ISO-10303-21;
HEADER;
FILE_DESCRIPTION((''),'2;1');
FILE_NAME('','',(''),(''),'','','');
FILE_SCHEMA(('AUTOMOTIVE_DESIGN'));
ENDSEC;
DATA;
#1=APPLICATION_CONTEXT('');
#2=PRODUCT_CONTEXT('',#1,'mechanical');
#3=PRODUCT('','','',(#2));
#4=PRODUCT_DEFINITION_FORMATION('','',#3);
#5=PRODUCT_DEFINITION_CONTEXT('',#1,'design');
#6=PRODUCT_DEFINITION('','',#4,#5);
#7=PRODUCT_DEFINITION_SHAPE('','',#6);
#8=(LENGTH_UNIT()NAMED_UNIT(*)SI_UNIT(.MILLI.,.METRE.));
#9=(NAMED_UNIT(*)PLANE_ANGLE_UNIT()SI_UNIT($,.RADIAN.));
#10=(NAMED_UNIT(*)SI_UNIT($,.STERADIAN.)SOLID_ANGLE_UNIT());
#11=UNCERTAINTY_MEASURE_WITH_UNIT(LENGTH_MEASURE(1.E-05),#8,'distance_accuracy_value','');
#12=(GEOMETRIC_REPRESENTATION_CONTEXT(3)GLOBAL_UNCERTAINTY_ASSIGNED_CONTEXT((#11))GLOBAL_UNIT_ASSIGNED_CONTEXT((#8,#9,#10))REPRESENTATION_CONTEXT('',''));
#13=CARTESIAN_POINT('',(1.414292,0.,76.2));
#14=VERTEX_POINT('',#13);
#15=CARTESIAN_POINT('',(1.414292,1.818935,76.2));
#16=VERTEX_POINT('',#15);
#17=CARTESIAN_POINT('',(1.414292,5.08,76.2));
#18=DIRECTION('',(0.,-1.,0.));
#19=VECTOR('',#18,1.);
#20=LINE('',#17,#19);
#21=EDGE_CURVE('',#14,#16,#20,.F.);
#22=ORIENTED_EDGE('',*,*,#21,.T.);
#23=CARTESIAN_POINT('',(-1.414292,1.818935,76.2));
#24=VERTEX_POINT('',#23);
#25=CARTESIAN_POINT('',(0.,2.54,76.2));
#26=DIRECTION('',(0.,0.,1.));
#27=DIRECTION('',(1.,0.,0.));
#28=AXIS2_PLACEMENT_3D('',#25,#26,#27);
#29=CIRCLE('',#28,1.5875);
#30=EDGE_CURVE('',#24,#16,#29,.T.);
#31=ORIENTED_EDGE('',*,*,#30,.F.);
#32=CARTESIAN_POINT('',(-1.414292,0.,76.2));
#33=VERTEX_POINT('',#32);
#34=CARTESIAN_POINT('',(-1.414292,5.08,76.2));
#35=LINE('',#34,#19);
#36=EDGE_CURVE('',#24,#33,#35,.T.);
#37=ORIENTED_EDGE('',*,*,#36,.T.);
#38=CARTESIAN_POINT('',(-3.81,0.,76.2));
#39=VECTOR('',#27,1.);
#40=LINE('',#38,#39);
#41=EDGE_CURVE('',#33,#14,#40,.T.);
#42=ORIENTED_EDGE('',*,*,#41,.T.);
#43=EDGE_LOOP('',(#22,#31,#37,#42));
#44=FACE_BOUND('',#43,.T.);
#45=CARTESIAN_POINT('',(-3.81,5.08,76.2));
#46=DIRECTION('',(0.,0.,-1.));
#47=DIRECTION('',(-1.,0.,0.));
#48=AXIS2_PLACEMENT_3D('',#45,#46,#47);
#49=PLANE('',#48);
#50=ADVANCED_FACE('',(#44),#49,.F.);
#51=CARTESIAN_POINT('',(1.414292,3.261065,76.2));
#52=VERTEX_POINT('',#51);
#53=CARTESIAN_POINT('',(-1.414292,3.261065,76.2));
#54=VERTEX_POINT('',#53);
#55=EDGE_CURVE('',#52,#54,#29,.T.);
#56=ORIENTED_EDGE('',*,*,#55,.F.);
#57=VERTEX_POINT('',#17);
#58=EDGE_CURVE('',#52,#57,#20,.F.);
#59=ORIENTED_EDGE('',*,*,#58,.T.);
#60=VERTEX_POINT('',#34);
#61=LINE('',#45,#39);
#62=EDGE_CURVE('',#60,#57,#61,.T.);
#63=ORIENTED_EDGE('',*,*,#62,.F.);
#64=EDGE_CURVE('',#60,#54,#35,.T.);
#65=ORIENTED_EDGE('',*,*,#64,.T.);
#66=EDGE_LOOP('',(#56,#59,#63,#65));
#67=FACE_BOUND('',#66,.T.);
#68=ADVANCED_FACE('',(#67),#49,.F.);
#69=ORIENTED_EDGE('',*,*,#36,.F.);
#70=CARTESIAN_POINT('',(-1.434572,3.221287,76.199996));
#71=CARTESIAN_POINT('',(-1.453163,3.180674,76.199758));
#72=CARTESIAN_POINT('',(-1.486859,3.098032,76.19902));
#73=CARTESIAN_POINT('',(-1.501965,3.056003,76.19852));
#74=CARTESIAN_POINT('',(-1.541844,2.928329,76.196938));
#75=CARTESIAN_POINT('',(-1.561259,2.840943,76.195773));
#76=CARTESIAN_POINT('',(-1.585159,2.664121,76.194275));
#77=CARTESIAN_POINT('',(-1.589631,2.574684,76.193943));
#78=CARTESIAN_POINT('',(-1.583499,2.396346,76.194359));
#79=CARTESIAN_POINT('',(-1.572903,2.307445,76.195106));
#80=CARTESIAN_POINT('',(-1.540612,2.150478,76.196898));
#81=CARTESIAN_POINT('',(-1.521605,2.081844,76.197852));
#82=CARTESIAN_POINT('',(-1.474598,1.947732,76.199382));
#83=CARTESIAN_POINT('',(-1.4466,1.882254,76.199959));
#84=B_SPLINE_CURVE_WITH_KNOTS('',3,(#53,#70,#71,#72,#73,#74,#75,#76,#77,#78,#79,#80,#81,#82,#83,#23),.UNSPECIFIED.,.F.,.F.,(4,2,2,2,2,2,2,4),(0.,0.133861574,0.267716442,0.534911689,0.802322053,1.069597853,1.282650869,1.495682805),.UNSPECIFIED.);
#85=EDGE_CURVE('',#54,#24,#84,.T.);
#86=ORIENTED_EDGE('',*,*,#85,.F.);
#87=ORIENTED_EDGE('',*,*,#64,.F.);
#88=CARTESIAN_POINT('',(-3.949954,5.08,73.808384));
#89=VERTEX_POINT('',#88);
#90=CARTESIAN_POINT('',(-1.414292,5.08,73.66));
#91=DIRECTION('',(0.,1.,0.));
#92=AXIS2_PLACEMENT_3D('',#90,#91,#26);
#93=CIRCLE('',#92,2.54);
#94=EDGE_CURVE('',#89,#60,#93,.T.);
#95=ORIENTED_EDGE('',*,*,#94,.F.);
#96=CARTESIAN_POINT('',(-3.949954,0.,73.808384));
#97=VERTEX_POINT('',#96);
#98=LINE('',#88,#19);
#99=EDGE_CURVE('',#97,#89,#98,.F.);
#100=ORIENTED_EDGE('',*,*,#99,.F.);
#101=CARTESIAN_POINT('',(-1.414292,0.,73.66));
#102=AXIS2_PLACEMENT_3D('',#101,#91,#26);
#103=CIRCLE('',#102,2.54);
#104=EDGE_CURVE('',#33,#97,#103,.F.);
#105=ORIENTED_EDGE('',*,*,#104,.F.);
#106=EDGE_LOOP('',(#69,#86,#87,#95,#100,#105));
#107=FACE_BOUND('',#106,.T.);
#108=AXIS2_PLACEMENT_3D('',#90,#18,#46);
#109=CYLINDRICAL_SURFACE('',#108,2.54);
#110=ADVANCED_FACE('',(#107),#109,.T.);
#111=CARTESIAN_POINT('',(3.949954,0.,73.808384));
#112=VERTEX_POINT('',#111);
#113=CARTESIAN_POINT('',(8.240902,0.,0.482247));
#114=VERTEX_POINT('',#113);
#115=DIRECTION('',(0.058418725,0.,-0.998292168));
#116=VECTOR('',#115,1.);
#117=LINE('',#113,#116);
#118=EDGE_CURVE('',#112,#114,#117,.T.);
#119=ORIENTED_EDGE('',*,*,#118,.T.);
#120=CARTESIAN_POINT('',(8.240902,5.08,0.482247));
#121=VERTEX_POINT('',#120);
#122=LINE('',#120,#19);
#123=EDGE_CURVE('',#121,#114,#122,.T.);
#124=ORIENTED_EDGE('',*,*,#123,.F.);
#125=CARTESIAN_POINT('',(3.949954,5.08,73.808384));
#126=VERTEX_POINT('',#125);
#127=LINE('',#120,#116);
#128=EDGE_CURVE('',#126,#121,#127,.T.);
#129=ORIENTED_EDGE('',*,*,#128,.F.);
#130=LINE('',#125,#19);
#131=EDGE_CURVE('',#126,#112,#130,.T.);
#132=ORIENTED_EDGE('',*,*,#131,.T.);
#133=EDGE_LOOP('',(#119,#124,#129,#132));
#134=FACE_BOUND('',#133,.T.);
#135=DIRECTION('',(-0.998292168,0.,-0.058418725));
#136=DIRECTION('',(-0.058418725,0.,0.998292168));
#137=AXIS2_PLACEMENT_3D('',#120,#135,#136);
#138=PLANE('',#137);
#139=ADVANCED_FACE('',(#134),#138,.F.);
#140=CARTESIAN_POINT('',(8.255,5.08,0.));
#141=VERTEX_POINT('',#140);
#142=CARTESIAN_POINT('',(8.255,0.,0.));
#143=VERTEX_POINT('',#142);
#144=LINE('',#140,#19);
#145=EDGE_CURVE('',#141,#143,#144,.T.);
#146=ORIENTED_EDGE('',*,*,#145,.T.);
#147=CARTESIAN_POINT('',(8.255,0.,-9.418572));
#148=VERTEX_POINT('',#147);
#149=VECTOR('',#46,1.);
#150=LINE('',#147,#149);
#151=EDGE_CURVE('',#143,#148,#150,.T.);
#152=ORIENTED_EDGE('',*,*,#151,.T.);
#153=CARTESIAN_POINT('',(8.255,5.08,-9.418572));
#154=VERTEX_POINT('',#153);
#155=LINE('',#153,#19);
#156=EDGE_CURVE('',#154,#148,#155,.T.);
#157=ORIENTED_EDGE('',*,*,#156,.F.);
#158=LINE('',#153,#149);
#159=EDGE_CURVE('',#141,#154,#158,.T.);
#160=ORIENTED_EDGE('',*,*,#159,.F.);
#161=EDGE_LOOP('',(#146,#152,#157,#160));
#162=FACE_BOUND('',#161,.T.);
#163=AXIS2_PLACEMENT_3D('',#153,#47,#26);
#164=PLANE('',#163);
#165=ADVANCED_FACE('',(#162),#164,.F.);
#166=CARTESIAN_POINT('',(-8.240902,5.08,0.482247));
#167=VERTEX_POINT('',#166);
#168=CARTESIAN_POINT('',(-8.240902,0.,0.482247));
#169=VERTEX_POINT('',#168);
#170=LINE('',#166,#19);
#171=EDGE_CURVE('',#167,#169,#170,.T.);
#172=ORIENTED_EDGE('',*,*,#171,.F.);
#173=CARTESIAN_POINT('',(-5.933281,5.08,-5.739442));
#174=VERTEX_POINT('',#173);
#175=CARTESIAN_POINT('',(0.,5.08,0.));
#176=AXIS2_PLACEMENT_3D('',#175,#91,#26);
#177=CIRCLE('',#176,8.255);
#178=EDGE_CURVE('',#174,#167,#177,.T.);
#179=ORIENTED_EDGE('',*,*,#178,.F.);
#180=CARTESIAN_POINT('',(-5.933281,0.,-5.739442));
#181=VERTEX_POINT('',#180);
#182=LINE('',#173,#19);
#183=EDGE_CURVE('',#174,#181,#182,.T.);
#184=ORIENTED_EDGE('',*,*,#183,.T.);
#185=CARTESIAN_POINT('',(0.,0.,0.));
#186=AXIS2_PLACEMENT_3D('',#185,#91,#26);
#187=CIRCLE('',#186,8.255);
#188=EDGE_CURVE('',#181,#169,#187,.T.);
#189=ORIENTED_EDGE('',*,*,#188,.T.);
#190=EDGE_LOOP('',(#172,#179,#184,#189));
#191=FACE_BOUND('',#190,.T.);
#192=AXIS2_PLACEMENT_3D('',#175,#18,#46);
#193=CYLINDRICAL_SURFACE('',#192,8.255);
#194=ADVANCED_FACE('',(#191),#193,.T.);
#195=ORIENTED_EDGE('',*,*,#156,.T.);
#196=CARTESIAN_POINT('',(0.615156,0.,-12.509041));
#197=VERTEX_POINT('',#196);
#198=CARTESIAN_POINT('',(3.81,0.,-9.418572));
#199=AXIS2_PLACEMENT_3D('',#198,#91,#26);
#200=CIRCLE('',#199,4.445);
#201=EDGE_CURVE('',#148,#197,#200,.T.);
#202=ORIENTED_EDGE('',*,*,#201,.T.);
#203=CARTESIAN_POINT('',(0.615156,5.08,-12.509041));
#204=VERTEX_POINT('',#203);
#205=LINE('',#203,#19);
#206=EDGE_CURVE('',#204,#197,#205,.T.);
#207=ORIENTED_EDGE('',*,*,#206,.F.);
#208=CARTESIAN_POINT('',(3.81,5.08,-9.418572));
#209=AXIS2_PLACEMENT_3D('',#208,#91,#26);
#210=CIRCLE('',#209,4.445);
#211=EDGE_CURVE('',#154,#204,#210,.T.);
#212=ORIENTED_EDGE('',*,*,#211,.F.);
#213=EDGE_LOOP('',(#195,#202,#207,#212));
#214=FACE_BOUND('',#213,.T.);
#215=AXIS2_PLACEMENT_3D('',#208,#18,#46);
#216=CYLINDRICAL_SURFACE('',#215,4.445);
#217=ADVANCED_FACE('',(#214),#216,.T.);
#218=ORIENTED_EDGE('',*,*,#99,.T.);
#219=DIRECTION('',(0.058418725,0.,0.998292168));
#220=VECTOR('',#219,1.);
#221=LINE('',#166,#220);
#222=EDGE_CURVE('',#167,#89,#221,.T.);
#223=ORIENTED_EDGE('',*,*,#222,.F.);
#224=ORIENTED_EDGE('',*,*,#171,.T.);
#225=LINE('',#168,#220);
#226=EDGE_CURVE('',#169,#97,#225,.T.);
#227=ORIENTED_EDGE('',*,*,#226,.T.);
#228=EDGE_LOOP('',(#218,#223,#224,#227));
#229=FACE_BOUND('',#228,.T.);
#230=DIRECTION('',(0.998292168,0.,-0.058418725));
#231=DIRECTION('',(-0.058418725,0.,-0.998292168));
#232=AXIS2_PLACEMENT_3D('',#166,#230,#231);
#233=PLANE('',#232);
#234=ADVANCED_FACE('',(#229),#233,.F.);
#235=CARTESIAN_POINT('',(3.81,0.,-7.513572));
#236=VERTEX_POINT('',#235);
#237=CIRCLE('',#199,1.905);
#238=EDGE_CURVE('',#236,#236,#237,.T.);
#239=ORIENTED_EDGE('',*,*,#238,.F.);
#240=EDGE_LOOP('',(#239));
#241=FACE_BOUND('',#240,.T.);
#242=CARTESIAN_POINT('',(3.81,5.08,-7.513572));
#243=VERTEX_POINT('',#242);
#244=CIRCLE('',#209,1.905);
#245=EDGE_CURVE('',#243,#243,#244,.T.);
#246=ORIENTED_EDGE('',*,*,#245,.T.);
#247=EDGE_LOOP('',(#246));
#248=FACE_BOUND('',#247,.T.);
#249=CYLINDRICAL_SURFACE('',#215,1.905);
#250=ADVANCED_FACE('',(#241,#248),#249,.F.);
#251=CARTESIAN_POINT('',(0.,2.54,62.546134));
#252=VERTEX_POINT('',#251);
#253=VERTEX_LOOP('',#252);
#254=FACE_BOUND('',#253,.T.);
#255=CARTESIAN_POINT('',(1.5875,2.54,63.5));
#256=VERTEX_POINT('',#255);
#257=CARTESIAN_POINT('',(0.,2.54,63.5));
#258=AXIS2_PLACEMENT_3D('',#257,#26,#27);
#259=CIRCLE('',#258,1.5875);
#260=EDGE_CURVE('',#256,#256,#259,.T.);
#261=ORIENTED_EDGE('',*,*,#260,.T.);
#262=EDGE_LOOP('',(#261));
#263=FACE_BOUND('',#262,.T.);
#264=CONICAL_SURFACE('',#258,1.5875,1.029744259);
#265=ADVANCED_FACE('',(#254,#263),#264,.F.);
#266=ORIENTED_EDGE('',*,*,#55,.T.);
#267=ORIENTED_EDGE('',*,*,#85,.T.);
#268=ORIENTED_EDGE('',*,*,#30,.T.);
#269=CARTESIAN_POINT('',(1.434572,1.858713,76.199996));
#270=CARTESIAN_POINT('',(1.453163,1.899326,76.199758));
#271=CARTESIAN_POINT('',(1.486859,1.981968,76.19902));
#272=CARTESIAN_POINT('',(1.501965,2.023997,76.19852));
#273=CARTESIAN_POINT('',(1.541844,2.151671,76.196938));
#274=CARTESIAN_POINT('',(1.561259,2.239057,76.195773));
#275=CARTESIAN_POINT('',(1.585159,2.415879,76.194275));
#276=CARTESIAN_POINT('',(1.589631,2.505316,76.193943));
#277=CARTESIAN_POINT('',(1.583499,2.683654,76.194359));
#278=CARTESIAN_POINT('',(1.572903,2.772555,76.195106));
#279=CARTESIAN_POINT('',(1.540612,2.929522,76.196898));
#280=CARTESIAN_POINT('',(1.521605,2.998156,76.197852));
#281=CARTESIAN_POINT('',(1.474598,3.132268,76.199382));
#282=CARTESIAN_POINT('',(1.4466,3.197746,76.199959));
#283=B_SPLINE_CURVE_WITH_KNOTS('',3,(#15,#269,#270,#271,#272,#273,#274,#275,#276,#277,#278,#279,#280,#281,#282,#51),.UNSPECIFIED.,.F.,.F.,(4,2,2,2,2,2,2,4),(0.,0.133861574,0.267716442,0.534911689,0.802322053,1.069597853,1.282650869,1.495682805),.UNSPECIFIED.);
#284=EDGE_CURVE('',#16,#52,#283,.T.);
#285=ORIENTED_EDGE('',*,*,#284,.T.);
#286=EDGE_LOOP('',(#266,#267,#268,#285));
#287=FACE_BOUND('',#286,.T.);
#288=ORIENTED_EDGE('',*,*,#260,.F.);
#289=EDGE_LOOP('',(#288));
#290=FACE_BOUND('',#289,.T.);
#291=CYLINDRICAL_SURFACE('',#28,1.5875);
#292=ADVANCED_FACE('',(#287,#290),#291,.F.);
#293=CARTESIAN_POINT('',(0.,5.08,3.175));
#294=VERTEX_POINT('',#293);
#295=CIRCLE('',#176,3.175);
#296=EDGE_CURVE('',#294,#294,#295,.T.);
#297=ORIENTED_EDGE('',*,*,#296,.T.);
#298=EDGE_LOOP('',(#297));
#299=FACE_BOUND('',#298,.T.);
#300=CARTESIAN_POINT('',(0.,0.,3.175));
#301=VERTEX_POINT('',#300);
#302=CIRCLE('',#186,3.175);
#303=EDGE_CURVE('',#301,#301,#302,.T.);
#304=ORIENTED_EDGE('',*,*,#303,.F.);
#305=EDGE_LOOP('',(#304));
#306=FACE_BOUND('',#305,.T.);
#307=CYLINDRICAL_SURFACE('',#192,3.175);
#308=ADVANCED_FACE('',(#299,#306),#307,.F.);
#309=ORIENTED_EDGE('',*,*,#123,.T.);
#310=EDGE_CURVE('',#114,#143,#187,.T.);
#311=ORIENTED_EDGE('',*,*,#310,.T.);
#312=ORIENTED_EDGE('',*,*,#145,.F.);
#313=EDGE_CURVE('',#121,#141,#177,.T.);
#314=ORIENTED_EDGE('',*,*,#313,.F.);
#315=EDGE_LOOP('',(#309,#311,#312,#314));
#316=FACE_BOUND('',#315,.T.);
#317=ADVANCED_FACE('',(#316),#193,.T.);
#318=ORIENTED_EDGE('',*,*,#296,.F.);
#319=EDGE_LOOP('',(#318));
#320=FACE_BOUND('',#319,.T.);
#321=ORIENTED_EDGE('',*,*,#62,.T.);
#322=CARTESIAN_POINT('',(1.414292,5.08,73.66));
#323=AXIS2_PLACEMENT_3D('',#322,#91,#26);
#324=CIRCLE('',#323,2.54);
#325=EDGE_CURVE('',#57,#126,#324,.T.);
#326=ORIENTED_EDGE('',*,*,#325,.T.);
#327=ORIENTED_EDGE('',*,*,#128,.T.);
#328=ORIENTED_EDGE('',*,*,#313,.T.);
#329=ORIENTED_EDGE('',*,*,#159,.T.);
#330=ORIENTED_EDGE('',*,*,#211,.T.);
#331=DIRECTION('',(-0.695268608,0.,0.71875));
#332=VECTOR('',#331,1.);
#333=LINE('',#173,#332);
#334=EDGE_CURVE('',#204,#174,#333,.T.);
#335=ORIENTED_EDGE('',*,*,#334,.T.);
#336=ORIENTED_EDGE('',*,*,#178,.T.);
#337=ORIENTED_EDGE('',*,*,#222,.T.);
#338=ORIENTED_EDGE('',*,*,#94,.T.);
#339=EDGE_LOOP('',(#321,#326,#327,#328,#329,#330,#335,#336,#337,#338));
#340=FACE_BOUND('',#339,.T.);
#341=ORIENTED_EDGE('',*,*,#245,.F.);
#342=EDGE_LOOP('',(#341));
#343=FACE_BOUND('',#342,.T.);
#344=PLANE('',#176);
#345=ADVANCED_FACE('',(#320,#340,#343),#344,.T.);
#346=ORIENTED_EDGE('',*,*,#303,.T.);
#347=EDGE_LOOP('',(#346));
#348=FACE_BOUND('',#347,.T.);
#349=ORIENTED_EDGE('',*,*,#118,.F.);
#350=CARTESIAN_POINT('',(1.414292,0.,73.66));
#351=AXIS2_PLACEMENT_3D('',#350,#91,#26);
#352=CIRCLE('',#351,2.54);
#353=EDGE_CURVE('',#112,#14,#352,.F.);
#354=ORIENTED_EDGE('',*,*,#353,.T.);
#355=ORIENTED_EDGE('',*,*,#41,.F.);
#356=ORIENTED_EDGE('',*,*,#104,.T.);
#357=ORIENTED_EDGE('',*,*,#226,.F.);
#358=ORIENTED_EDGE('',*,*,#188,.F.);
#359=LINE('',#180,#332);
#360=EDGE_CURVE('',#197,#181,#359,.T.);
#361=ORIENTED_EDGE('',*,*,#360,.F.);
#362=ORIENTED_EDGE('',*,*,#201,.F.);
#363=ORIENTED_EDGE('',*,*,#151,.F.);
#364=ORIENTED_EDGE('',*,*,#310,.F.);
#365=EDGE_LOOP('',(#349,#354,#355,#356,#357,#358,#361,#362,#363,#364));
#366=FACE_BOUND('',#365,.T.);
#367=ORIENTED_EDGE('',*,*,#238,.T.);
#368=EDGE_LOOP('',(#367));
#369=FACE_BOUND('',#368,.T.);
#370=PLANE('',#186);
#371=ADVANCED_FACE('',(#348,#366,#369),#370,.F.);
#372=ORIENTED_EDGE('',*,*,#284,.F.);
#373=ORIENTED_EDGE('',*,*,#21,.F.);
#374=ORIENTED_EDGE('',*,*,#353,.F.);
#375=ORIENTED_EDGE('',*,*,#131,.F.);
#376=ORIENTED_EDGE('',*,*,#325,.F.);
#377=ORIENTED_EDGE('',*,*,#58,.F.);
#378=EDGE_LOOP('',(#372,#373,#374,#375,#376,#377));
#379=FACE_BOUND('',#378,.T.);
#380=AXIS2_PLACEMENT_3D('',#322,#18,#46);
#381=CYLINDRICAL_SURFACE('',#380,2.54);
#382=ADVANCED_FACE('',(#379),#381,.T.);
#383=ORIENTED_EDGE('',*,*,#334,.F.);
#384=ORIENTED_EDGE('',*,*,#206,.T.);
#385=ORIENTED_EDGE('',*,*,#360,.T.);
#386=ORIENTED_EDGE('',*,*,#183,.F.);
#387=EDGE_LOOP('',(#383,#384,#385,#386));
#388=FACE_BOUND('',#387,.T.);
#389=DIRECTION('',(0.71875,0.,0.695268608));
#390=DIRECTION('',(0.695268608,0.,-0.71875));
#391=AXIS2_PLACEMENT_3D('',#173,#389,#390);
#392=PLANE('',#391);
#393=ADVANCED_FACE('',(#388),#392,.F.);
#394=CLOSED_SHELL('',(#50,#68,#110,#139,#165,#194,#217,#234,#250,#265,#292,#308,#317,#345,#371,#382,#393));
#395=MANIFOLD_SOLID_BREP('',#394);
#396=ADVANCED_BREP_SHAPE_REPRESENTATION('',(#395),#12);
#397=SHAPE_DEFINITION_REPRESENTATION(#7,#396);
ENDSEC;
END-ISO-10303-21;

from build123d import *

# Parameters (mm, degrees)
SKETCH1_R                        = 3.175
SKETCH1_R_2                      = 1.905
BOSS_EXTRUDE1_DEPTH              = 5.08
F_1_8_0_125_DIAMETER_HOLE1_D     = 3.175
F_1_8_0_125_DIAMETER_HOLE1_DEPTH = 12.7
F_1_8_0_125_DIAMETER_HOLE1_TIP   = 0.953866233
FILLET1_R                        = 2.54


with BuildPart() as part:
    # Sketch1 → Boss-Extrude1 (new body)
    with BuildSketch(Plane(origin=(0, 0, 0), x_dir=(1, 0, 0), z_dir=(0, 1, 0))):
        with BuildLine():
            Line((-5.93328125, 5.73944236), (0.61515625, 12.509041042))
            ThreePointArc((0.61515625, 12.509041042), (5.476875, 13.539197363), (8.255, 9.418572079))
            Line((8.255, 9.418572079), (8.255, 0))
            ThreePointArc((8.255, 0), (8.251474709, -0.241226303), (8.240901846, -0.482246574))
            Line((8.240901846, -0.482246574), (3.81, -76.2))
            Line((3.81, -76.2), (-3.81, -76.2))
            Line((-3.81, -76.2), (-8.240901846, -0.482246574))
            ThreePointArc((-8.240901846, -0.482246574), (-7.739781645, 2.870680248), (-5.93328125, 5.73944236))
        make_face()
        with Locations(Location((0, 0, 0), (0, 0, 270))):
            Circle(SKETCH1_R, mode=Mode.SUBTRACT)
        with Locations(Location((3.81, 9.418572079, 0), (0, 0, 270))):
            Circle(SKETCH1_R_2, mode=Mode.SUBTRACT)
    extrude(amount=BOSS_EXTRUDE1_DEPTH)

    # 1/8 (0.125) Diameter Hole1
    with Locations(Plane.XY.offset(76.2)):
        with Locations((0, 2.54)):
            Hole(F_1_8_0_125_DIAMETER_HOLE1_D / 2, depth=F_1_8_0_125_DIAMETER_HOLE1_DEPTH)
            with Locations((0, 0, -(F_1_8_0_125_DIAMETER_HOLE1_DEPTH + F_1_8_0_125_DIAMETER_HOLE1_TIP / 2))):  # 118° drill point
                Cone(0, F_1_8_0_125_DIAMETER_HOLE1_D / 2, F_1_8_0_125_DIAMETER_HOLE1_TIP, mode=Mode.SUBTRACT)

    # Fillet1
    # the kernel refuses this fillet: 2.54 mm, written as the material it takes off along each edge
    with BuildSketch(Plane(origin=(3.81, -5.989269764, 76.2), x_dir=(0.05841872493617041, 0, -0.9982921679432489), z_dir=(0, 1, 0))) as fillet1_piece_1:
        with BuildLine():
            CenterArc((FILLET1_R * 0.943192088749, FILLET1_R), FILLET1_R, 183.349053141, 86.650946859)
            Line((-FILLET1_R * 0.0551000791946, FILLET1_R * 0.941581275064), (0, 0))
            Line((0, 0), (FILLET1_R * 0.943192088749, 0))
        make_face()
    extrude(amount=17.058539527, mode=Mode.SUBTRACT)
    with BuildSketch(Plane(origin=(-3.81, -5.989269764, 76.2), x_dir=(-0.05841872493617083, 0, -0.9982921679432489), z_dir=(0, 1, 0))) as fillet1_piece_2:
        with BuildLine():
            CenterArc((FILLET1_R * 0.943192088749, -FILLET1_R), FILLET1_R, 90, 86.650946859)
            Line((-FILLET1_R * 0.0551000791946, -FILLET1_R * 0.941581275064), (0, 0))
            Line((0, 0), (FILLET1_R * 0.943192088749, 0))
        make_face()
    extrude(amount=17.058539527, mode=Mode.SUBTRACT)


solid = part.part
